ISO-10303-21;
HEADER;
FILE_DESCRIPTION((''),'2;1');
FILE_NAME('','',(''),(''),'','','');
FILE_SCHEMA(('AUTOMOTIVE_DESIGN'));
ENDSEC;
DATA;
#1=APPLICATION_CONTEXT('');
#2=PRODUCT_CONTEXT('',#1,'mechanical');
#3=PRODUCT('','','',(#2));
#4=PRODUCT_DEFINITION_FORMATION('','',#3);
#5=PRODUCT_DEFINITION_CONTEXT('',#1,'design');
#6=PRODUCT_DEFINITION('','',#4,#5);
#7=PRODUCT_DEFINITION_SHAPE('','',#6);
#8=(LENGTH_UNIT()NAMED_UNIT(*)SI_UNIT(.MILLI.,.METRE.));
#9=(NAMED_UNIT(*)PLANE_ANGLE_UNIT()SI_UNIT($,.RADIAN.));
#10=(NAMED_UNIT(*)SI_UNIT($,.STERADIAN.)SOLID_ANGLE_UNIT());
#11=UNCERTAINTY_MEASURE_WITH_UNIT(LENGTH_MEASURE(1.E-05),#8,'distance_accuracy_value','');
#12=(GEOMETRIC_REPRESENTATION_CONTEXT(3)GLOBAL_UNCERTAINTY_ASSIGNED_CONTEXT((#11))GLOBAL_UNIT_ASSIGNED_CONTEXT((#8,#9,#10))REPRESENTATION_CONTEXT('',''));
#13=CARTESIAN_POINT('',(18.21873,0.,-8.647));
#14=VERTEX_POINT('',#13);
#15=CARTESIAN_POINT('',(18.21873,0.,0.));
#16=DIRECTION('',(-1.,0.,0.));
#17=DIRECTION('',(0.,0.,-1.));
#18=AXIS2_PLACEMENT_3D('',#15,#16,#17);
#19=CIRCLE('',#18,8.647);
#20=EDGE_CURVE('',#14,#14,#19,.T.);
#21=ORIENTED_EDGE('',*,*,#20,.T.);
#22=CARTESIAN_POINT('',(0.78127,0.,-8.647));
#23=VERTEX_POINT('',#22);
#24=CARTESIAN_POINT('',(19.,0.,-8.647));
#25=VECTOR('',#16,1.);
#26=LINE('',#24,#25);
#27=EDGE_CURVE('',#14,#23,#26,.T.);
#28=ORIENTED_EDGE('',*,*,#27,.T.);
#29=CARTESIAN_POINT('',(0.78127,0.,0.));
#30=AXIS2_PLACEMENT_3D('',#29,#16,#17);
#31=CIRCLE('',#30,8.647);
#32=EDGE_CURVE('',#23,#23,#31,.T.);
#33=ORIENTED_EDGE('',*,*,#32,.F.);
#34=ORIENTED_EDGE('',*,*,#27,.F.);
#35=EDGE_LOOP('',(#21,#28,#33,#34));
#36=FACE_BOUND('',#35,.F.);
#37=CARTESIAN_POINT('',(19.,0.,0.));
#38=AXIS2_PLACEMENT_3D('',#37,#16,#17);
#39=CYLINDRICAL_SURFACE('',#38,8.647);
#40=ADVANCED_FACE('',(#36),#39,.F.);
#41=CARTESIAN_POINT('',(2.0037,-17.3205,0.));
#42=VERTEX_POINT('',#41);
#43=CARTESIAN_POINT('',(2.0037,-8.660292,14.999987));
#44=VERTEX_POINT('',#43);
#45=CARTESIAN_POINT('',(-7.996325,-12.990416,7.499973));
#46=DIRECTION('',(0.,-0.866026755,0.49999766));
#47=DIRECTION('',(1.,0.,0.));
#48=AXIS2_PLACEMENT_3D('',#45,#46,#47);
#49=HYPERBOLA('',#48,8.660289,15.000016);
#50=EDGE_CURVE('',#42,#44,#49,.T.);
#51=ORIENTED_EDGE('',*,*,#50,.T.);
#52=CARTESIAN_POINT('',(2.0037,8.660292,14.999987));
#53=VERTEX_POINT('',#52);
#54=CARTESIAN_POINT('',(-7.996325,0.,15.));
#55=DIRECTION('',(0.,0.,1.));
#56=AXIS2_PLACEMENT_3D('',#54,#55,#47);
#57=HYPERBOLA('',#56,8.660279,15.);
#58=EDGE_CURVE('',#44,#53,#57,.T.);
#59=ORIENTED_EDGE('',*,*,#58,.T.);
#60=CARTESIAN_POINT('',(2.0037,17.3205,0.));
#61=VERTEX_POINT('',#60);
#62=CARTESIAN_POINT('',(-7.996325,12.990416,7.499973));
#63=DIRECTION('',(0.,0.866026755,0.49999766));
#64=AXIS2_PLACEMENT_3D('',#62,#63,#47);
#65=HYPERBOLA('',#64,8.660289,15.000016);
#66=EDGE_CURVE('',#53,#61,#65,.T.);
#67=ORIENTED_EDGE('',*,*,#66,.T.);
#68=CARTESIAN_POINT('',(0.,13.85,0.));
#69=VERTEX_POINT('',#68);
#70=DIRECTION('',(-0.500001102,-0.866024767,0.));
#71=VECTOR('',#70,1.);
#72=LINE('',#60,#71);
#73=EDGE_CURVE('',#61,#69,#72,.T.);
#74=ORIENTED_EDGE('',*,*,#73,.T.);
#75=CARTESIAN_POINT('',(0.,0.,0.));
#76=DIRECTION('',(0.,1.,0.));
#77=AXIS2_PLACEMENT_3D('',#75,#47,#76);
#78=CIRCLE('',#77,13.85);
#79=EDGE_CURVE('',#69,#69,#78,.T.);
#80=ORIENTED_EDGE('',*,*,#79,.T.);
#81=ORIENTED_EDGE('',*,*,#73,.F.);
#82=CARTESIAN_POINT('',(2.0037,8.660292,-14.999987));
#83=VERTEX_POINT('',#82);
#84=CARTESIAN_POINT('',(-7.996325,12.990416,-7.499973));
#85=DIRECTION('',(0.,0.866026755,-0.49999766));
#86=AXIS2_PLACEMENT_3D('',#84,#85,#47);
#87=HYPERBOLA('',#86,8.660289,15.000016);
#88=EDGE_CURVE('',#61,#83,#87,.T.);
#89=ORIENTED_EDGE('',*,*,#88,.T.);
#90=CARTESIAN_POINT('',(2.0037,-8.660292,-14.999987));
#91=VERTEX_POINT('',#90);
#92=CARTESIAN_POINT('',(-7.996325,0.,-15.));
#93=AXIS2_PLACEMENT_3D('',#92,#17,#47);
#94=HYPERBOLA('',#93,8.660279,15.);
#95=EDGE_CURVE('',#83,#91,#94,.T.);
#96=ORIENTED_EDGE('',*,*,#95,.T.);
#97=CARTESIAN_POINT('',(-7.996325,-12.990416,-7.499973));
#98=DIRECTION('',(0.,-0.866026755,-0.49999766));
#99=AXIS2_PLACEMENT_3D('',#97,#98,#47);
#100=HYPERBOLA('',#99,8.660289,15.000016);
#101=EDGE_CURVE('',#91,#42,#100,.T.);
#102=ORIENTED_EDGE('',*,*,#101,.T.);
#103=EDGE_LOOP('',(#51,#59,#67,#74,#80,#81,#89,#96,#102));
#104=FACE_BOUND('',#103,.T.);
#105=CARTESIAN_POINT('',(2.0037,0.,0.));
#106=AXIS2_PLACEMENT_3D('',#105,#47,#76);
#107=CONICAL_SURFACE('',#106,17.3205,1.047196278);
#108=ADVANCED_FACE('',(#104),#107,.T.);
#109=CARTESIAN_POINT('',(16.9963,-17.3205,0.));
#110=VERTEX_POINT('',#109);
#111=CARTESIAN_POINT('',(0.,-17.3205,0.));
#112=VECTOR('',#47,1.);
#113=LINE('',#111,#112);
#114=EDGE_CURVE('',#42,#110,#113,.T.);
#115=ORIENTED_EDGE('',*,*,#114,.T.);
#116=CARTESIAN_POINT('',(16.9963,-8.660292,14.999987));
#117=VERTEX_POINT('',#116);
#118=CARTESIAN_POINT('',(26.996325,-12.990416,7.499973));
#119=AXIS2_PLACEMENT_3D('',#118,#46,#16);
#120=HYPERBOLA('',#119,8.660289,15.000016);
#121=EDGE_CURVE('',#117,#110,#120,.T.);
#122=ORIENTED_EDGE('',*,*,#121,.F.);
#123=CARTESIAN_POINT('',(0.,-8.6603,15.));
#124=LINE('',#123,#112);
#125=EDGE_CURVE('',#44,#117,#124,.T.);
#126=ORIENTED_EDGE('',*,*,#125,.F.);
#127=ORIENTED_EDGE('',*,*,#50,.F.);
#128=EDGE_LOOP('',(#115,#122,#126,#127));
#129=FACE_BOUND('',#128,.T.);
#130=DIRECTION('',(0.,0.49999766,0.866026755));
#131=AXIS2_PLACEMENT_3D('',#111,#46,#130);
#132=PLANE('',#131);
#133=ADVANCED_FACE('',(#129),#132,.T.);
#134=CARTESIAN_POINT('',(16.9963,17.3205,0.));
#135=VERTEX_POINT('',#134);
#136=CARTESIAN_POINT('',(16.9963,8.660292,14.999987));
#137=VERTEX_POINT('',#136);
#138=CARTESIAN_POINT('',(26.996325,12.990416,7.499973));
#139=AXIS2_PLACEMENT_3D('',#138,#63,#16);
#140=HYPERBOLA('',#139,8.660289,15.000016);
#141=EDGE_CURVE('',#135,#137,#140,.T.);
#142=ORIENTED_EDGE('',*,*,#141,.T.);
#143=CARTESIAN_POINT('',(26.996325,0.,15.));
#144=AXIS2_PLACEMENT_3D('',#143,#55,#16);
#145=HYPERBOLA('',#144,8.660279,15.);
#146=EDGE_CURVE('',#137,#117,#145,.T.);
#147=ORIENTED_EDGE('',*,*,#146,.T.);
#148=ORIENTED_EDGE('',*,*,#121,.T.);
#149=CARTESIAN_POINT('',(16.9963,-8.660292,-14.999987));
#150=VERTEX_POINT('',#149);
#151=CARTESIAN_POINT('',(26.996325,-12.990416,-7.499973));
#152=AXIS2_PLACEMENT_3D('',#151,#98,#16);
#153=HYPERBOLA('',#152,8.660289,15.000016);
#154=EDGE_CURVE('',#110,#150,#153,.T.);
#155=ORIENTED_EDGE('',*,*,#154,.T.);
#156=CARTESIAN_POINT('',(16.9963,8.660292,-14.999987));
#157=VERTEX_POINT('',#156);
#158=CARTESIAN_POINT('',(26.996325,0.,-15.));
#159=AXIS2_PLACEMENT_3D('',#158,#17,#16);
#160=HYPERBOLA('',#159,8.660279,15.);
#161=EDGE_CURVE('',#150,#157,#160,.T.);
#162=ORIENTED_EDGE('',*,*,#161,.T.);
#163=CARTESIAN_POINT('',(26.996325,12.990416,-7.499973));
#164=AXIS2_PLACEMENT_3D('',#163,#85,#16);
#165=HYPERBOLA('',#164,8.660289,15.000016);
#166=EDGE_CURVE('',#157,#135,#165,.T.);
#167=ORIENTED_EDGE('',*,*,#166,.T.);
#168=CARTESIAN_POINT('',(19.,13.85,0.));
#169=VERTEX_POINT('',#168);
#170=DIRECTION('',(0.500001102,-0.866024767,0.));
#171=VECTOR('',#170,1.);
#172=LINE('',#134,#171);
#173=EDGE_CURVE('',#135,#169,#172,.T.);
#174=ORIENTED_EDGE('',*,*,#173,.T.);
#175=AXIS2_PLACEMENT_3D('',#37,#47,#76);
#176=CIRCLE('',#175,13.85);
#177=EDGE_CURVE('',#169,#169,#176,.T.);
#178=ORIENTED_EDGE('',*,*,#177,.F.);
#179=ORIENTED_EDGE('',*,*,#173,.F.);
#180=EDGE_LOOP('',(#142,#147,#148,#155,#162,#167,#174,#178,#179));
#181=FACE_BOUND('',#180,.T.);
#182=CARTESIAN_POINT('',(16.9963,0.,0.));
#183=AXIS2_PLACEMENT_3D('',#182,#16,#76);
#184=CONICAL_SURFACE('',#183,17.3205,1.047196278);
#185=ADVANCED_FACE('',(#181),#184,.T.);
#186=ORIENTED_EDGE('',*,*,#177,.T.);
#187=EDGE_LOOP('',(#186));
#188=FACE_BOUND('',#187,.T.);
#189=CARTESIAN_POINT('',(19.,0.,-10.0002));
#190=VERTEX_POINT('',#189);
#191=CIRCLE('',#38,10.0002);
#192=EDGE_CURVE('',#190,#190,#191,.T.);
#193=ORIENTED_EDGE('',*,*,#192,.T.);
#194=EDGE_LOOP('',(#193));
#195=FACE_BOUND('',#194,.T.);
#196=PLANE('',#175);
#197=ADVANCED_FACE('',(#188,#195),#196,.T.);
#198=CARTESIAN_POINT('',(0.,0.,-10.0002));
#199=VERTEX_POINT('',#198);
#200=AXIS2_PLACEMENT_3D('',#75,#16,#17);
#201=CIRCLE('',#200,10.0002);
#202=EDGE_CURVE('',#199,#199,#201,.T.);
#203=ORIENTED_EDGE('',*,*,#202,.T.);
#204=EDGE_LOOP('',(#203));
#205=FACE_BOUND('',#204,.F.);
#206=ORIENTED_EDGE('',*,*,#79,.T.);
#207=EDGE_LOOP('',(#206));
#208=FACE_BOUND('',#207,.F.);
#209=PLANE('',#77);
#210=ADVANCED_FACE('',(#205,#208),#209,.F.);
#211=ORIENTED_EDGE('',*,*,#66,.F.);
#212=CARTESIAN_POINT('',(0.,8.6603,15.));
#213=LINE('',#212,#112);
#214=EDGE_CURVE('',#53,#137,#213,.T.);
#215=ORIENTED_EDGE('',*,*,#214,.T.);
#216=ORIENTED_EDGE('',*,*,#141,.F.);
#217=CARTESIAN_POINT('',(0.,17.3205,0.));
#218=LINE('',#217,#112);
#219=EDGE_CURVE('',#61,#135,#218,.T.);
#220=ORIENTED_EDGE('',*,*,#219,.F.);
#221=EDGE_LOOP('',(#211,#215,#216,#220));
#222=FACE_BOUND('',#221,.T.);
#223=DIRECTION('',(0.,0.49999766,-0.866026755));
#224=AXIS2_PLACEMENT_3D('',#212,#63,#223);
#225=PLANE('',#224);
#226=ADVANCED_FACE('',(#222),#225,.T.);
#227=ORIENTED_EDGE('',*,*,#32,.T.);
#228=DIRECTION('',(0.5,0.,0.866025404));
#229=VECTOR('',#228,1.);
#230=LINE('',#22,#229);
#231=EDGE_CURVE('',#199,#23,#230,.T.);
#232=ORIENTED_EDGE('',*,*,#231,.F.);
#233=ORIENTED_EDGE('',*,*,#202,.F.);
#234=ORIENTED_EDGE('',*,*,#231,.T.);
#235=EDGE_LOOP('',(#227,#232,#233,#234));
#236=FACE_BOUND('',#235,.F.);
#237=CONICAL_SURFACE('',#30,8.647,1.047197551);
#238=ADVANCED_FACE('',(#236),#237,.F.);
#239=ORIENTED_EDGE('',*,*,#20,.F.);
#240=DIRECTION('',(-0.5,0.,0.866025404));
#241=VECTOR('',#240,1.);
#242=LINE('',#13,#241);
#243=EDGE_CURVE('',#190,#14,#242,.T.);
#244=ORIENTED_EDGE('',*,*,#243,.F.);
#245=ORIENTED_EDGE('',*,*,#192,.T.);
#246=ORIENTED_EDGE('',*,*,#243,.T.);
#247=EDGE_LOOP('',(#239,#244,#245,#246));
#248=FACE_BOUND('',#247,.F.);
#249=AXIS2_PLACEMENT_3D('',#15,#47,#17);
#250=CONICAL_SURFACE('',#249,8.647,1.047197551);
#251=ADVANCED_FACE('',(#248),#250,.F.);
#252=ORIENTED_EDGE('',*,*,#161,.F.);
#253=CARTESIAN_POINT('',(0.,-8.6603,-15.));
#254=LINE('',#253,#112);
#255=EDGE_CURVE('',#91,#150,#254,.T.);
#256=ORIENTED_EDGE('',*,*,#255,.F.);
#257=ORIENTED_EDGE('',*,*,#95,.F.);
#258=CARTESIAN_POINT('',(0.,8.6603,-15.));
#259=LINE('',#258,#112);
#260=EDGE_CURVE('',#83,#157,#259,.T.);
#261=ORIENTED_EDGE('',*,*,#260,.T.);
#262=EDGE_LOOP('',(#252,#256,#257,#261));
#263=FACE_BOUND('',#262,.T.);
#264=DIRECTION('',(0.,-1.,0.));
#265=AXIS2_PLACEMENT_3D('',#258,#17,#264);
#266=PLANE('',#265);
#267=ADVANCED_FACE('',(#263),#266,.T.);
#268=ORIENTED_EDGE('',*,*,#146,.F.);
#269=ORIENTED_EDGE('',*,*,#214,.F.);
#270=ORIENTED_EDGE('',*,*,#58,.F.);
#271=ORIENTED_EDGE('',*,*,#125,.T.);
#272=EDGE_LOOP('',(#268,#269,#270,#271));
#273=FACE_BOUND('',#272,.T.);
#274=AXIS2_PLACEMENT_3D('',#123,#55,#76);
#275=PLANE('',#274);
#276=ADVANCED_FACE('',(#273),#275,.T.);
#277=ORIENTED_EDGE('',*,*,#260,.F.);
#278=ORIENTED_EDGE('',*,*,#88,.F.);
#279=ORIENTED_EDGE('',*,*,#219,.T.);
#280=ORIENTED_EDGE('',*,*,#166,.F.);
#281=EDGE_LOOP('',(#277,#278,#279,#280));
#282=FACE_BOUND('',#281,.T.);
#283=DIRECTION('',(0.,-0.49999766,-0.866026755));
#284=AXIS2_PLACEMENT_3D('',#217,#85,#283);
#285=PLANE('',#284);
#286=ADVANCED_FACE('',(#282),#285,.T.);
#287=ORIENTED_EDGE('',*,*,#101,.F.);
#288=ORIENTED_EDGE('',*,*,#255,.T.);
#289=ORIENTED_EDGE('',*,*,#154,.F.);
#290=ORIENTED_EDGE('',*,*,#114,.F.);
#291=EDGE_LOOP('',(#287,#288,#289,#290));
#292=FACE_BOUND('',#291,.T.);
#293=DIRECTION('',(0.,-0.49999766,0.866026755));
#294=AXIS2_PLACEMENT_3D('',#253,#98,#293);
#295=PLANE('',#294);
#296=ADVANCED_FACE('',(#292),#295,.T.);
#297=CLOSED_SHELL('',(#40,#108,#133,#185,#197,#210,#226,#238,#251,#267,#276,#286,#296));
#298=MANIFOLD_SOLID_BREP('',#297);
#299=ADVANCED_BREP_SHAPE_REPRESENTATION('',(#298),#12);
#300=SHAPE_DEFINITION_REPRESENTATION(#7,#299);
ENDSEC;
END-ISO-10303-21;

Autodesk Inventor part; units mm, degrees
ref_plane "YZ Plane" through (0, 0, 0) normal (1, 0, 0) x (0, 1, 0)
ref_plane "XZ Plane" through (0, 0, 0) normal (0, 1, 0) x (-1, 0, 0)
sketch "Sketch1" plane through (0, 0, 0) normal (1, 0, 0) x (0, 1, 0)
  line L0 (-17.3205, 0) -> (-8.6603, 15)
  line L1 (-8.6603, 15) -> (8.6603, 15)
  line L2 (8.6603, 15) -> (17.3205, 0)
  line L3 (17.3205, 0) -> (8.6603, -15)
  line L4 (8.6603, -15) -> (-8.6603, -15)
  line L5 (-8.6603, -15) -> (-17.3205, 0)
  point P0 (0, 0)
  point P1 (0, 0)
  dimension "d0" = 34.641
extrude "Body" add sketch "Sketch1" along normal blind 19
sketch "Sketch2" plane through (0, 0, 0) normal (0, 0, 1) x (1, 0, 0)
  line L0 (0, 8.6603) -> (0, 17.3205) projected
  line L1 (0, 17.3205) -> (19, 17.3205) projected
  line L2 (19, 8.6603) -> (19, 17.3205) projected
  line L3 (-3.8, 0) -> (22.8, 0) projected
  line L4 (2.0037, 17.3205) -> (0, 13.85)
  line L5 (16.9963, 17.3205) -> (19, 13.85)
  dimension "d3" = 30
  dimension "d4" = 30
  dimension "d5" = 27.7
  dimension "d6" = 27.7
revolve "Chamfer1" cut sketch "Sketch2" angle 360 about axis through (-10, 0, 0) along (1, 0, 0)
sketch "Sketch3" plane through (19, 0, 0) normal (1, 0, 0) x (0, 0, -1)
  arc A0 (-0.625, -1.0825) -> (0.625, -1.0825) centre (0, 0) ccw projected
hole "Thread" at (19, 0, 0) direction (-1, 0, 0) diameter 17.294 end through all thread size "M20x2.5" class "6H" standard "ISO Metric profile"
chamfer "Chamfer2" distance 1.3532 angle 30 1 edges at (19, 0, 8.647) measured on face at (19, 11.9605, -1.4523)
chamfer "Chamfer3" distance 1.3532 angle 30 1 edges at (0, 0, 8.647) measured on face at (0, 11.9605, -1.4523)
ref_plane "Work Plane1" through (-30.997, 0, 0) normal (0, -0.8660254, -0.5) x (1, 0, 0)
equation "\"d0\" = 1.1547 * SW"
equation "\"d1\" = KOH"
equation "\"d3\" = ANG1"
equation "\"d4\" = ANG2"
equation "\"d5\" = SW0"
equation "\"d6\" = SW01"
equation "\"d8\" = -0.5 * GD1 + 0.5 * NND"
equation "\"d40\" = -0.5 * GD1 + 0.5 * NND"
equation "\"d10\" = -0.5 * GD1 + 0.5 * NND"
equation "\"d41\" = -0.5 * GD1 + 0.5 * NND"
equation "\"ANG1\" = 30deg"
equation "\"ANG2\" = 30deg"
equation "\"KOH\" = 19"
equation "\"SW0\" = 27.7"
equation "\"SW01\" = SW0"
equation "\"GUL\" = 0.541266 * PTC"
equation "\"TOA\" = 30deg"
equation "\"PTC\" = 2.5"
equation "\"E0\" = 1.155 * SW"
equation "\"GAL\" = 0.541266 * PTC"
equation "\"SW\" = 30"
equation "\"GD1\" = 17.293671"
equation "\"NND\" = 20"
properties part number "ISO 4034 - M20" material "Steel"
